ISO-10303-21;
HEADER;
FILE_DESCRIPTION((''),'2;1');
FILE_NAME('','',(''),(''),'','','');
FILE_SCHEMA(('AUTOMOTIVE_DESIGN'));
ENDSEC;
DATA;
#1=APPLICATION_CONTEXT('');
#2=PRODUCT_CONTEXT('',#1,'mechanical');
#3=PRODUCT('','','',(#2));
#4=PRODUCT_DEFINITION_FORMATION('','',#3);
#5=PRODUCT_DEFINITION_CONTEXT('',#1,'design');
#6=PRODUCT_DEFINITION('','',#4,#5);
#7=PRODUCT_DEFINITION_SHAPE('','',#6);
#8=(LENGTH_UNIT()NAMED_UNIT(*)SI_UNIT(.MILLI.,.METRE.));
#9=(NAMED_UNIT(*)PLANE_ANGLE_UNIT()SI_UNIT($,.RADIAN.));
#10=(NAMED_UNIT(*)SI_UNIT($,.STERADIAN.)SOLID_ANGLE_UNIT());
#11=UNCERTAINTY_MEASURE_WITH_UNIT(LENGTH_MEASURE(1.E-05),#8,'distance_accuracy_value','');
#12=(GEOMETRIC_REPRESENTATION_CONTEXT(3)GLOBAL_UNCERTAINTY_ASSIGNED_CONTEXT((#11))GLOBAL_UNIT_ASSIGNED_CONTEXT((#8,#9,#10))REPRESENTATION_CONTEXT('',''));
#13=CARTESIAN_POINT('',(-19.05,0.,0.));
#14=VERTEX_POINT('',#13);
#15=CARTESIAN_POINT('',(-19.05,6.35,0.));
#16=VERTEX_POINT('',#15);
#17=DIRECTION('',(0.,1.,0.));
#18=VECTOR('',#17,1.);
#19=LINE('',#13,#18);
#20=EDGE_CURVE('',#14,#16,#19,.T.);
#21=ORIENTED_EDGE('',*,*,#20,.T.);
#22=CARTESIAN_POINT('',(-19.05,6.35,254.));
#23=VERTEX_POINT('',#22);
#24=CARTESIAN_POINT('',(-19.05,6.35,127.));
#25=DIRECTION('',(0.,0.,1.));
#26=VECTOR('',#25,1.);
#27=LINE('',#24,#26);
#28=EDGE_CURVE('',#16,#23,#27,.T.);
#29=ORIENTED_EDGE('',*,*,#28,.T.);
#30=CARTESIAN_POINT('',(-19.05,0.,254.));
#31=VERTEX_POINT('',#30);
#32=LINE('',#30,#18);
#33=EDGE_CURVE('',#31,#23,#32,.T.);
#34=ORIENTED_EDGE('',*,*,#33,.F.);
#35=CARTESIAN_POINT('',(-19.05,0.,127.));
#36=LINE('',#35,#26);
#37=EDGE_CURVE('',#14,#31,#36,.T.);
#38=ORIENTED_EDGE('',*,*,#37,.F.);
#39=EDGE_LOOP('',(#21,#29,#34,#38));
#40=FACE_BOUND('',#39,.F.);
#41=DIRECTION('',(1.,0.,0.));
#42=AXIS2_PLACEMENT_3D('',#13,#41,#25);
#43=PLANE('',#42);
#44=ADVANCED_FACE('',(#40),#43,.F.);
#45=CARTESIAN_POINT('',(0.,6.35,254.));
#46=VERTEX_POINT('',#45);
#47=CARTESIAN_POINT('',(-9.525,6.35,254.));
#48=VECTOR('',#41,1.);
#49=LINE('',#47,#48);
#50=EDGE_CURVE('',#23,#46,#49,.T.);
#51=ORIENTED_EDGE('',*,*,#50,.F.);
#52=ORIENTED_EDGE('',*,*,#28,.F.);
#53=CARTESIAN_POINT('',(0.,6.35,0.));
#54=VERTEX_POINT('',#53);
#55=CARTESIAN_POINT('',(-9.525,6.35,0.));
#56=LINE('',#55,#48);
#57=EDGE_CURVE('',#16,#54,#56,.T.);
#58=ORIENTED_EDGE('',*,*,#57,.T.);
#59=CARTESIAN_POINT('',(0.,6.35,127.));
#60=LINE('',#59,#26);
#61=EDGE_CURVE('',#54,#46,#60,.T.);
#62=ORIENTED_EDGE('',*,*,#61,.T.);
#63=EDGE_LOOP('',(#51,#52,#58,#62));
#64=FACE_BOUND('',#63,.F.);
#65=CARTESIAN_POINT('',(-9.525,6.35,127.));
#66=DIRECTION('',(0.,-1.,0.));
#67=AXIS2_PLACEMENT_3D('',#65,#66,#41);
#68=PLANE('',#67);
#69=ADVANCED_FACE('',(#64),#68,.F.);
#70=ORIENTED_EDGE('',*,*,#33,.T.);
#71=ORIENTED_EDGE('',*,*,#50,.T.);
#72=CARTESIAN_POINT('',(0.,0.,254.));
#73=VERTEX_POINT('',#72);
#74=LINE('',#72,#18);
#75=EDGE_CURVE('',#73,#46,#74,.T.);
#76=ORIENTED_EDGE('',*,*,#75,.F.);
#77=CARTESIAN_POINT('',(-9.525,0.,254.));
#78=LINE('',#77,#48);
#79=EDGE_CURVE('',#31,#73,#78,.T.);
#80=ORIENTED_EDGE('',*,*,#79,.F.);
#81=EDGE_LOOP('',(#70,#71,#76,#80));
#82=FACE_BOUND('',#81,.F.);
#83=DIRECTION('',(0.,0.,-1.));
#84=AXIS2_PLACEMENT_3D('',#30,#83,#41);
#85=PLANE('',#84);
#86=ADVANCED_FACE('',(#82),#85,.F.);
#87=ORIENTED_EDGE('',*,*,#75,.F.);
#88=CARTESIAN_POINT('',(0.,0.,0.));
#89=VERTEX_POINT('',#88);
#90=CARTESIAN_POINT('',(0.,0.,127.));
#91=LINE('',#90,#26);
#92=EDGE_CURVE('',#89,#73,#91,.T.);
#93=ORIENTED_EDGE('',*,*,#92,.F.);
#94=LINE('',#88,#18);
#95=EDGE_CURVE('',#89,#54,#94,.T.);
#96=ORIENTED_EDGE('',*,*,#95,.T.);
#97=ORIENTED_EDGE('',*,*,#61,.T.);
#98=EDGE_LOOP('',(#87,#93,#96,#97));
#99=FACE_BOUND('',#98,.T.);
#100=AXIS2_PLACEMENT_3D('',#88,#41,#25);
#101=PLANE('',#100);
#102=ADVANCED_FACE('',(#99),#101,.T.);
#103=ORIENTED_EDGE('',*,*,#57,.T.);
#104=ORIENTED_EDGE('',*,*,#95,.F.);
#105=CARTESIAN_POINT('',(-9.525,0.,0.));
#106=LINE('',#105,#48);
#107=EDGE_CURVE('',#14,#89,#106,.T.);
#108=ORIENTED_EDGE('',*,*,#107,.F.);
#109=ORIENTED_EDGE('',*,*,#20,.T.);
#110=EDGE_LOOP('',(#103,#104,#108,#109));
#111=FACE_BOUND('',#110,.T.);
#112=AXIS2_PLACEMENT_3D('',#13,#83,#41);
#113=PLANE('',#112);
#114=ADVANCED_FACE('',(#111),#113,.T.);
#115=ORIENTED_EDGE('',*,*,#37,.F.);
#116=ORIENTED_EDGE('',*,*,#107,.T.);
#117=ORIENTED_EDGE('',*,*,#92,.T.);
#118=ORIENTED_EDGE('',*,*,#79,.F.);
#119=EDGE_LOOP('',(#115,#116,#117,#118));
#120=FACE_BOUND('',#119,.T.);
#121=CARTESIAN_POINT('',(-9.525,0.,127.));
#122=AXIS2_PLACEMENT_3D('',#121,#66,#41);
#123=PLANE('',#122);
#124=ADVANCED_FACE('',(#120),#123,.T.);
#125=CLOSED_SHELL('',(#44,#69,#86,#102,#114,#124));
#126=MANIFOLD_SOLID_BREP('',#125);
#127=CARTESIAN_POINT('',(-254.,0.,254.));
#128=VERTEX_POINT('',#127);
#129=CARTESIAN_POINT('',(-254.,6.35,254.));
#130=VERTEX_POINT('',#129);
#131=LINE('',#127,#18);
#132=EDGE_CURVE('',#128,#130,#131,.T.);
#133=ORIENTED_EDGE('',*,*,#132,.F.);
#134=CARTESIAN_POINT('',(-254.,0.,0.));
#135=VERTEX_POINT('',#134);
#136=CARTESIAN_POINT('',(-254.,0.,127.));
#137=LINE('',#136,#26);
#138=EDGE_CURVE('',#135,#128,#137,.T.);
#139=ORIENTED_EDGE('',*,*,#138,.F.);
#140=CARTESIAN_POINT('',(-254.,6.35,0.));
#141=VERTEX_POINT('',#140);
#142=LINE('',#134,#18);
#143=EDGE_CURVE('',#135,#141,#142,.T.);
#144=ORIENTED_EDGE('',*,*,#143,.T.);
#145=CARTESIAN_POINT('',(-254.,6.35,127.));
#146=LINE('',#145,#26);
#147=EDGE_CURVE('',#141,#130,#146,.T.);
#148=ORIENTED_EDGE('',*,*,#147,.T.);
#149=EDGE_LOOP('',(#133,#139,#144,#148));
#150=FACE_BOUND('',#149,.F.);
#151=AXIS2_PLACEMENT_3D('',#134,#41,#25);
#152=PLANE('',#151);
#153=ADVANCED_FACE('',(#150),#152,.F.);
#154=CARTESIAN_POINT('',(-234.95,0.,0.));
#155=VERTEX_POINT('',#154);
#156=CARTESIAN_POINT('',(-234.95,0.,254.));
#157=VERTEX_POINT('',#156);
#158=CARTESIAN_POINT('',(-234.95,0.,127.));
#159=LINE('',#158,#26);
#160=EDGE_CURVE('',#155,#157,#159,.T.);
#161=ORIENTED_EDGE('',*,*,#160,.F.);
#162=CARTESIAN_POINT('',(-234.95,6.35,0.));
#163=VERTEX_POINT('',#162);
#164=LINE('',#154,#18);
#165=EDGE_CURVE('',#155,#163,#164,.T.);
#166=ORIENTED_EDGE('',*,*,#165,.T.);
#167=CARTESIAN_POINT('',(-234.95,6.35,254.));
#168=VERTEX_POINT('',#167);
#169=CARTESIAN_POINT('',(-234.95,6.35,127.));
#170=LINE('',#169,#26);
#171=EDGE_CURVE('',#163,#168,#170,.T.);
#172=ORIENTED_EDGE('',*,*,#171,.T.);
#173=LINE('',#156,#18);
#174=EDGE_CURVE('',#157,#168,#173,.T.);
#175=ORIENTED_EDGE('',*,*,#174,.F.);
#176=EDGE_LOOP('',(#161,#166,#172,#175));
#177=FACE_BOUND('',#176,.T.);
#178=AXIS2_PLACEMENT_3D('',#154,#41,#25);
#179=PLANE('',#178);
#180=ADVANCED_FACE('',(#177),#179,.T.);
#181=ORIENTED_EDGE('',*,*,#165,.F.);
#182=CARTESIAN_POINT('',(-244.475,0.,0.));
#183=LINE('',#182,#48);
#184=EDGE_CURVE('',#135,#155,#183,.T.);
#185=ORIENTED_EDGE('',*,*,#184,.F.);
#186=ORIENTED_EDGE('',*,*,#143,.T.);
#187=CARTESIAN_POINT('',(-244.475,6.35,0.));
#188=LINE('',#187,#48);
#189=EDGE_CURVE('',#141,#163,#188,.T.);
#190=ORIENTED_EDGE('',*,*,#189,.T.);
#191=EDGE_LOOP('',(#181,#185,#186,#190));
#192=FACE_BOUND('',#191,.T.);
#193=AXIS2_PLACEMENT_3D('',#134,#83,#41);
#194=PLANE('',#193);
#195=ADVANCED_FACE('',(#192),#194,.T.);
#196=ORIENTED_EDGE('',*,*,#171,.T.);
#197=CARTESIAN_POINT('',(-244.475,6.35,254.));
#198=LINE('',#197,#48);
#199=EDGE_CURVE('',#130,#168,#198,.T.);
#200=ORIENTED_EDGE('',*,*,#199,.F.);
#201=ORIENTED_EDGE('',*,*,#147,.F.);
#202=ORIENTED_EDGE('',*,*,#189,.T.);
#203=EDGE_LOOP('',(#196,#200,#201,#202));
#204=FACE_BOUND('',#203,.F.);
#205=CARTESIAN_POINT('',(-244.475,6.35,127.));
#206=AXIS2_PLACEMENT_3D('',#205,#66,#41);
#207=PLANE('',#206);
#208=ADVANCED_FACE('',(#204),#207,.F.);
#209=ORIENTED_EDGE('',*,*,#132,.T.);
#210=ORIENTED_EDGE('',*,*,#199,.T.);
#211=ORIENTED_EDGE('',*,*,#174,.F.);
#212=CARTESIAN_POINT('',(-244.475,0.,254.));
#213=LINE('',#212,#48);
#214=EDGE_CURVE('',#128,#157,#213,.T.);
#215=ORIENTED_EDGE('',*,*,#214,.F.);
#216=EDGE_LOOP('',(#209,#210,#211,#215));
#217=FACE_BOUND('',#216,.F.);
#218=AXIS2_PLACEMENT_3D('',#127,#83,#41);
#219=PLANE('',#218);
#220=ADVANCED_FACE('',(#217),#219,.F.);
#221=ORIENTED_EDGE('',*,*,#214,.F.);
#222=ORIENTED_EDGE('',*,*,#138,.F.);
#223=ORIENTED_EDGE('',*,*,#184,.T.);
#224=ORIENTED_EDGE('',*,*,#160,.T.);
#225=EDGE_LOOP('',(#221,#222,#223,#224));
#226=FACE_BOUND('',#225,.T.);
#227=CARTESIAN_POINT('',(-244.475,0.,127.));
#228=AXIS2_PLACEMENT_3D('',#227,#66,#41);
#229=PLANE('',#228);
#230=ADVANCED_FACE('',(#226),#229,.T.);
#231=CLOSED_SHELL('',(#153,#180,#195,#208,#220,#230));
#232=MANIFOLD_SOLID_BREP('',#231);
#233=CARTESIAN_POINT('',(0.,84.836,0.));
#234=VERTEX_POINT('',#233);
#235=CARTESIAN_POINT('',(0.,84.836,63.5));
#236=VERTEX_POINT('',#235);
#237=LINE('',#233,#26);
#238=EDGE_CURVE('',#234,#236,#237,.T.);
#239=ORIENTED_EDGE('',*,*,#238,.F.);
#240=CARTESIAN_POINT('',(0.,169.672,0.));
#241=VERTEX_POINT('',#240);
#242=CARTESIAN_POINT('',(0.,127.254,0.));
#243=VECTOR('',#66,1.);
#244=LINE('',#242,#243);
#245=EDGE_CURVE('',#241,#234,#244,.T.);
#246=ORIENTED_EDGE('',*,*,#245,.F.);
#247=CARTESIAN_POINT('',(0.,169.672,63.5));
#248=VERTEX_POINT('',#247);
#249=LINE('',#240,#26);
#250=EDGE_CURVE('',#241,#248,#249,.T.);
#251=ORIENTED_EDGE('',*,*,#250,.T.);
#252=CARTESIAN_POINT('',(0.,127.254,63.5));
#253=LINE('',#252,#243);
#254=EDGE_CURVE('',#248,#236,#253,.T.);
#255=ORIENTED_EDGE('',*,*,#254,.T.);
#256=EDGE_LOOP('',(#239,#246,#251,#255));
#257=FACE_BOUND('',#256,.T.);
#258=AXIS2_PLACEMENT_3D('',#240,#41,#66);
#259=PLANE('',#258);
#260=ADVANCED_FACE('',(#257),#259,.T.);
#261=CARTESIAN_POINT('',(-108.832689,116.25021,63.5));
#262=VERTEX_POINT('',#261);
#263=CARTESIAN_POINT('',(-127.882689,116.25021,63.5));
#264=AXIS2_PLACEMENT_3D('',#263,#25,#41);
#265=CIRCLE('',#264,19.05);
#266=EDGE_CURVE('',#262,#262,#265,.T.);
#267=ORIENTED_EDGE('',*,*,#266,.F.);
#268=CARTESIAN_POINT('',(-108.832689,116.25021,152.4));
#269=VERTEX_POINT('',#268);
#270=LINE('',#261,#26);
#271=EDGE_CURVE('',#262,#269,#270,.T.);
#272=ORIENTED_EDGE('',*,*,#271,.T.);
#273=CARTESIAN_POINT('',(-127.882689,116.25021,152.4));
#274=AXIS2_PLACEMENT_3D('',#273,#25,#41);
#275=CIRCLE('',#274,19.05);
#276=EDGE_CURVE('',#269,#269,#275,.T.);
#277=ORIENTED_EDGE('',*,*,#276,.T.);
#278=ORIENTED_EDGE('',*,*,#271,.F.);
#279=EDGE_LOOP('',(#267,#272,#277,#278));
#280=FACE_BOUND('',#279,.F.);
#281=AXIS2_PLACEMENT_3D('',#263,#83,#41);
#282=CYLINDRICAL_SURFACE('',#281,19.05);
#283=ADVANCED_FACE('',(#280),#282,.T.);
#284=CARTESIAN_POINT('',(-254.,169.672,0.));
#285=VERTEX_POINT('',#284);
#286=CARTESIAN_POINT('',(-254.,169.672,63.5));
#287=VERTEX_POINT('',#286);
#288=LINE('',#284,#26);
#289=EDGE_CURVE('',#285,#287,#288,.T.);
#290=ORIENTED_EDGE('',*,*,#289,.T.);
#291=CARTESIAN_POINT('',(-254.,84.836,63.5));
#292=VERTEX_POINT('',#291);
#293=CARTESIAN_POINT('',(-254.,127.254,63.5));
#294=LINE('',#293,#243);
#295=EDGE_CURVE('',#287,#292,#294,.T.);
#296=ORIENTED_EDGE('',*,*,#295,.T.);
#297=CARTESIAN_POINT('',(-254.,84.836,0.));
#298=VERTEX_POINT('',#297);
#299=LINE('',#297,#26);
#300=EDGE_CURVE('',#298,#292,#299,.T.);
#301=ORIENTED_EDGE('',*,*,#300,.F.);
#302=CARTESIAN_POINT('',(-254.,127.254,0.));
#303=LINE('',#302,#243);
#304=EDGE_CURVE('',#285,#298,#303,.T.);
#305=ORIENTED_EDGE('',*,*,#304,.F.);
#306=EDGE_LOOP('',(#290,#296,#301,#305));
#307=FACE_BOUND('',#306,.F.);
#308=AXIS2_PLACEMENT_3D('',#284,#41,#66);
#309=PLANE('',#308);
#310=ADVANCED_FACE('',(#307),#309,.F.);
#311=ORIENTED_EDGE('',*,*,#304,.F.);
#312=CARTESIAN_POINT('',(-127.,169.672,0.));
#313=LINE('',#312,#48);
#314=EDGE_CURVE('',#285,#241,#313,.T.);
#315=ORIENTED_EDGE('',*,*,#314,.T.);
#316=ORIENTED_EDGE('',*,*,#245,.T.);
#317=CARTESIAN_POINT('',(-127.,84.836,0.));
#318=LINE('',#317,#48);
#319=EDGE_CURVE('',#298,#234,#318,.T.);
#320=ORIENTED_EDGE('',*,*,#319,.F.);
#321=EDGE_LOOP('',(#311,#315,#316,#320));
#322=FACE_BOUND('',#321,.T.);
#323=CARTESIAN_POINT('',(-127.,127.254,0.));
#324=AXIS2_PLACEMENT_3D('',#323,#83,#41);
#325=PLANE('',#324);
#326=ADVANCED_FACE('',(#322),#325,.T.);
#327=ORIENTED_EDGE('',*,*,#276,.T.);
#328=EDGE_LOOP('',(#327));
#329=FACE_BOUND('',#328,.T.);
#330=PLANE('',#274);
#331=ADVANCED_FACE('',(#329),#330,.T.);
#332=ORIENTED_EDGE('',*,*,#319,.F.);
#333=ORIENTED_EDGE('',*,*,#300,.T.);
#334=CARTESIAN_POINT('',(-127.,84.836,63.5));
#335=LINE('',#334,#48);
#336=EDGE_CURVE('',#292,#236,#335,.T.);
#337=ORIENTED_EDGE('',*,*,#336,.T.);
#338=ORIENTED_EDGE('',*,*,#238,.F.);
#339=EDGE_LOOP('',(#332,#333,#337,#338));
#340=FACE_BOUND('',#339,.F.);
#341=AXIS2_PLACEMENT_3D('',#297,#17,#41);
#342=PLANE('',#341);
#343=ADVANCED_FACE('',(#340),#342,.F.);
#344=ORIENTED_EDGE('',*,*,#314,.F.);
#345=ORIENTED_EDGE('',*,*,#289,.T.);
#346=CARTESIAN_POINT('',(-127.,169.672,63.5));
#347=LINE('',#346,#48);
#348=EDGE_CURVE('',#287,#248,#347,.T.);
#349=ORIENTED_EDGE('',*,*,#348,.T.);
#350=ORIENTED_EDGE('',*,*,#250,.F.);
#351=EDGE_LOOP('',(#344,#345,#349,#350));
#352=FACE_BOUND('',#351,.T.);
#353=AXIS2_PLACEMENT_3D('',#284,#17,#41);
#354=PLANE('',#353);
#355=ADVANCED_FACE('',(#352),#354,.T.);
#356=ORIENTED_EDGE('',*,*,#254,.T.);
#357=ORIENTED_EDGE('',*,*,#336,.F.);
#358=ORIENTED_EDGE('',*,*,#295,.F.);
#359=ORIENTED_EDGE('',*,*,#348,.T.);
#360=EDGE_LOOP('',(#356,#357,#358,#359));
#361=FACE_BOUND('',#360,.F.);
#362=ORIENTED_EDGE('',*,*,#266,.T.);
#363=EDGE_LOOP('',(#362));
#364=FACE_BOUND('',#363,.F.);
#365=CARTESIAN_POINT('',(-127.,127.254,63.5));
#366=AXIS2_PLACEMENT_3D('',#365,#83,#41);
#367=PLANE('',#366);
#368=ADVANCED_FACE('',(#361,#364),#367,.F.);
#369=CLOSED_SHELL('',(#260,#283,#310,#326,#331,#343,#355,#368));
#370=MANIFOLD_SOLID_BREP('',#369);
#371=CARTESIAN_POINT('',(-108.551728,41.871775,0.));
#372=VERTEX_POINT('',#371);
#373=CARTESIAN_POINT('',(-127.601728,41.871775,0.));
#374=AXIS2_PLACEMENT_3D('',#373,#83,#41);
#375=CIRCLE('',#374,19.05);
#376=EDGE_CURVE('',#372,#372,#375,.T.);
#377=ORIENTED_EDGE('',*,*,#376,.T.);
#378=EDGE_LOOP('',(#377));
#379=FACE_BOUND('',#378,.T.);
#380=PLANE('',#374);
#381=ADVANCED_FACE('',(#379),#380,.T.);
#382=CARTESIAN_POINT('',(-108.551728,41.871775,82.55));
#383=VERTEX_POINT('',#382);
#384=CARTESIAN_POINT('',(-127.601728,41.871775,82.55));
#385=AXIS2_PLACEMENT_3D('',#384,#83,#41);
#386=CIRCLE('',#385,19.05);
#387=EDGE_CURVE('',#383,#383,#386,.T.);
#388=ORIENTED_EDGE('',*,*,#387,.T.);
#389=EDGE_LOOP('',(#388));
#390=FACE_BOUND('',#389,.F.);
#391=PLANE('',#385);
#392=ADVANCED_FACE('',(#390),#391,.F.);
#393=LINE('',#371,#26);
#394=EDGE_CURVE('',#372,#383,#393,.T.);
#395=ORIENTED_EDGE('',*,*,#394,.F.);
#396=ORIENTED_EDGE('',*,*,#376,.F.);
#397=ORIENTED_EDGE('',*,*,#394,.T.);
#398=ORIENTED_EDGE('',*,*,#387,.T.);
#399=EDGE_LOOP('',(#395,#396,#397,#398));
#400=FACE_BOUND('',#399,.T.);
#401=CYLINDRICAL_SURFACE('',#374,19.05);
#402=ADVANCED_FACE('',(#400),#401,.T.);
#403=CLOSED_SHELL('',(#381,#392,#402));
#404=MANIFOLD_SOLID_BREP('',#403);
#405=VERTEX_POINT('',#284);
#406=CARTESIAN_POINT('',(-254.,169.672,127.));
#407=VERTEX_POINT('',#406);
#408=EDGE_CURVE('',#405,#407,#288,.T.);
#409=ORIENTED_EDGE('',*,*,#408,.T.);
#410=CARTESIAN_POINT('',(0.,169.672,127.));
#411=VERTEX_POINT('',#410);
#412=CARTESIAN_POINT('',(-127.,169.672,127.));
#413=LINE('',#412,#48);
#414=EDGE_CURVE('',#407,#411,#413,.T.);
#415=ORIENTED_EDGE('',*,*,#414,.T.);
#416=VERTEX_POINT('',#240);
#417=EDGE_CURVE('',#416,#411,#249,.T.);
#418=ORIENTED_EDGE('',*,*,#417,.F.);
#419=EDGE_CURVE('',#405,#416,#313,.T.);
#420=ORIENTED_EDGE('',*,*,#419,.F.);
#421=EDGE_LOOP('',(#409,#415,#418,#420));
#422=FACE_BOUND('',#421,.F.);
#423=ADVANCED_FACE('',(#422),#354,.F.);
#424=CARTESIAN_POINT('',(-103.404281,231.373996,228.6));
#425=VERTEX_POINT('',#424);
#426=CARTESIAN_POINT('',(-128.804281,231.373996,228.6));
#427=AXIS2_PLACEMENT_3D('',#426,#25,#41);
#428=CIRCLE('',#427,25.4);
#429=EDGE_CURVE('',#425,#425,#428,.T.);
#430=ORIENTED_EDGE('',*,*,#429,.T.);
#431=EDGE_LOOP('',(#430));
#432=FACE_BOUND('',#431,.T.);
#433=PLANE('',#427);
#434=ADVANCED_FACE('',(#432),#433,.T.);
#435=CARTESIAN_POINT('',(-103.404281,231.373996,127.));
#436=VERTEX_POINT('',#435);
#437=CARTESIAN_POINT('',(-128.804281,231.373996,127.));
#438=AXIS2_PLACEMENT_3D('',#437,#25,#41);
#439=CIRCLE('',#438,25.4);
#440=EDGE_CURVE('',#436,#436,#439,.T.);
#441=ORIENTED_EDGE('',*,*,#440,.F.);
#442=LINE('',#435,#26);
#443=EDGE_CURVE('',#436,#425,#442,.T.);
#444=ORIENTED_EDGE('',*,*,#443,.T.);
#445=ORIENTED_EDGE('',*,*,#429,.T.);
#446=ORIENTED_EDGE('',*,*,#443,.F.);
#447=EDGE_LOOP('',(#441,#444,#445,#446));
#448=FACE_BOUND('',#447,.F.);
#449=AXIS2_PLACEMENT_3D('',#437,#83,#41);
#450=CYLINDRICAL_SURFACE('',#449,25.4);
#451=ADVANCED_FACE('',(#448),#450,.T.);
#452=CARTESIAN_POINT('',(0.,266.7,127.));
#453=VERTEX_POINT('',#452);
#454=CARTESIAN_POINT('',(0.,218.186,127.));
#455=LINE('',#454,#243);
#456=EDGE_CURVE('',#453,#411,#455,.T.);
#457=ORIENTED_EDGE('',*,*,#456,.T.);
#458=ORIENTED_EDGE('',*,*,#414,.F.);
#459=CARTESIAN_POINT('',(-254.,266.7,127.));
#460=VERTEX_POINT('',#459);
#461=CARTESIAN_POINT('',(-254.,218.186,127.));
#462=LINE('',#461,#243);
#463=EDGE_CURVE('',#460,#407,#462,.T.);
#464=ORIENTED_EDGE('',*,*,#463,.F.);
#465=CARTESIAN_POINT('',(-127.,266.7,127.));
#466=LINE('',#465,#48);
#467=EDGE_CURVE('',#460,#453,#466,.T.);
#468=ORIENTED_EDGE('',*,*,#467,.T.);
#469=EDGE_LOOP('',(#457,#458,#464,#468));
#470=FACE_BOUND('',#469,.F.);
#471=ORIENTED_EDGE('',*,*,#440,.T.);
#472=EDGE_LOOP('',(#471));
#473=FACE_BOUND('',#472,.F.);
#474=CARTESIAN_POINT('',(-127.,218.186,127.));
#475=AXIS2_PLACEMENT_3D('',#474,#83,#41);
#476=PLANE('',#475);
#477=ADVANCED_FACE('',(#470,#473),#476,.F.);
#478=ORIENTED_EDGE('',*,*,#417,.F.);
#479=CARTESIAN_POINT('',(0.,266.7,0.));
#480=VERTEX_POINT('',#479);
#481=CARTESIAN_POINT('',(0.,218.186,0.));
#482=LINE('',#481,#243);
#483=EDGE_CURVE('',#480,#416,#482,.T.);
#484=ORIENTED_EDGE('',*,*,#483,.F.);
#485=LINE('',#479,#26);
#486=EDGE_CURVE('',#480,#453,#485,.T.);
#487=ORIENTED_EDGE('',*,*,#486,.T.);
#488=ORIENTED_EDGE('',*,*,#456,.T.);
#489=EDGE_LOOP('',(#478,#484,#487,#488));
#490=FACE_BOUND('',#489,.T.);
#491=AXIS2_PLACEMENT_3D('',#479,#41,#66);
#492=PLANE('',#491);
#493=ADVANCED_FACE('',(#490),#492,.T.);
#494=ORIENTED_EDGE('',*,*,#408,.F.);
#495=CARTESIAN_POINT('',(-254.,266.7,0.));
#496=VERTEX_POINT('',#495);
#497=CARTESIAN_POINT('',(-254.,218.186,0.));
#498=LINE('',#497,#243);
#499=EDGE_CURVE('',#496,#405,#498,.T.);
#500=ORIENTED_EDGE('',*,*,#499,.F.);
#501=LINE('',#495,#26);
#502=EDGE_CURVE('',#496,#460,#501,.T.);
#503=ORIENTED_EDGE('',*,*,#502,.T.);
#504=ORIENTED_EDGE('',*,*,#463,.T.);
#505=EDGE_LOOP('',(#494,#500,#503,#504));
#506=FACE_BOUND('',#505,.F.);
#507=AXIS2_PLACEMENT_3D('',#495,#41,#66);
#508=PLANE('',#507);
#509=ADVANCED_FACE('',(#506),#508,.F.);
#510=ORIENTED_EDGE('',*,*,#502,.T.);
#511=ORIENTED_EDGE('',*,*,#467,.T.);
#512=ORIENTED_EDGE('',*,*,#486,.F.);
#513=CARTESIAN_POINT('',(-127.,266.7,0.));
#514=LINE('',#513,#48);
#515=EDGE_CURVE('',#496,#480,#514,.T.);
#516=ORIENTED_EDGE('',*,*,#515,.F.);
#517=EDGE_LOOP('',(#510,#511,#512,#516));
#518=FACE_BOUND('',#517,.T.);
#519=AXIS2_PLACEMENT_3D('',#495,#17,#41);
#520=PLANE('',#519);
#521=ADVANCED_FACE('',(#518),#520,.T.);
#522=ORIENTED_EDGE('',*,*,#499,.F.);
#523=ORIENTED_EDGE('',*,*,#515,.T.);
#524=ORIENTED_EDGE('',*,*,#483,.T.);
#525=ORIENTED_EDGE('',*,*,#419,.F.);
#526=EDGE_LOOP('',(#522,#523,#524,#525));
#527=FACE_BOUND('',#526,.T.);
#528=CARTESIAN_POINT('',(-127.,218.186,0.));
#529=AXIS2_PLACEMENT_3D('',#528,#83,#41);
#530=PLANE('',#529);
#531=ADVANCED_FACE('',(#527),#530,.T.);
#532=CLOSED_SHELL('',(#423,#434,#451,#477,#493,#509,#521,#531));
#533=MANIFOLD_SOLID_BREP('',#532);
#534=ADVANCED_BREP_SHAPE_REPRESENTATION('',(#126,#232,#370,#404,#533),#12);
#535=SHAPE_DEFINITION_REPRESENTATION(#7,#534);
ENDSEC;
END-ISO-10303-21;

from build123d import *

# Parameters (mm, degrees)
F5_W      = 19.05
F5_H      = 254
F6_DEPTH  = 6.35
F7_W      = 254
F7_H      = 84.836
F8_DEPTH  = 63.5
F7_H_2    = 97.028
F9_DEPTH  = 127
F10_R     = 19.05
F11_DEPTH = 82.55
F12_R     = 19.05
F13_DEPTH = 88.9
F14_R     = 25.4
F15_DEPTH = 101.6


# Not quite as in the source:
# - the program builds the solid bodies; features that only make, move or delete a surface that nothing else refers to are left out


with BuildPart() as f6:
    # F5 (on Front) → F6 (new body)
    with BuildSketch(Plane.XZ):
        with Locations((-244.475, 127)):
            Rectangle(F5_W, F5_H)
    extrude(amount=-F6_DEPTH)


with BuildPart() as f6b:
    # F5 (on Front) → F6, piece 2 (new body)
    with BuildSketch(Plane.XZ):
        with Locations((-9.525, 127)):
            Rectangle(F5_W, F5_H)
    extrude(amount=-F6_DEPTH)


with BuildPart() as f8:
    # F7 (on face) → F8 (new body)
    with BuildSketch(Plane(origin=(0, 0, 0), x_dir=(1, 0, 0), z_dir=(0, 0, -1))):
        with Locations((-127, -127.254)):
            Rectangle(F7_W, F7_H)
    extrude(amount=-F8_DEPTH)

    # F12 (on face) → F13 (join)
    with BuildSketch(Plane.XY.offset(63.5)):
        with Locations((-127.8826892376, 116.2502095103)):
            Circle(F12_R)
    extrude(amount=F13_DEPTH)


with BuildPart() as f9:
    # F7 (on face) → F9 (new body)
    with BuildSketch(Plane(origin=(0, 0, 0), x_dir=(1, 0, 0), z_dir=(0, 0, -1))):
        with Locations((-127, -218.186)):
            Rectangle(F7_W, F7_H_2)
    extrude(amount=-F9_DEPTH)

    # F14 (on face) → F15 (join)
    with BuildSketch(Plane.XY.offset(127)):
        with Locations((-128.804281354, 231.3739955425)):
            Circle(F14_R)
    extrude(amount=F15_DEPTH)


with BuildPart() as f11:
    # F10 (on face) → F11 (new body)
    with BuildSketch(Plane(origin=(0, 0, 0), x_dir=(1, 0, 0), z_dir=(0, 0, -1))):
        with Locations((-127.6017278433, -41.8717749417)):
            Circle(F10_R)
    extrude(amount=-F11_DEPTH)


solid = Compound([f6.part, f6b.part, f8.part, f9.part, f11.part])
